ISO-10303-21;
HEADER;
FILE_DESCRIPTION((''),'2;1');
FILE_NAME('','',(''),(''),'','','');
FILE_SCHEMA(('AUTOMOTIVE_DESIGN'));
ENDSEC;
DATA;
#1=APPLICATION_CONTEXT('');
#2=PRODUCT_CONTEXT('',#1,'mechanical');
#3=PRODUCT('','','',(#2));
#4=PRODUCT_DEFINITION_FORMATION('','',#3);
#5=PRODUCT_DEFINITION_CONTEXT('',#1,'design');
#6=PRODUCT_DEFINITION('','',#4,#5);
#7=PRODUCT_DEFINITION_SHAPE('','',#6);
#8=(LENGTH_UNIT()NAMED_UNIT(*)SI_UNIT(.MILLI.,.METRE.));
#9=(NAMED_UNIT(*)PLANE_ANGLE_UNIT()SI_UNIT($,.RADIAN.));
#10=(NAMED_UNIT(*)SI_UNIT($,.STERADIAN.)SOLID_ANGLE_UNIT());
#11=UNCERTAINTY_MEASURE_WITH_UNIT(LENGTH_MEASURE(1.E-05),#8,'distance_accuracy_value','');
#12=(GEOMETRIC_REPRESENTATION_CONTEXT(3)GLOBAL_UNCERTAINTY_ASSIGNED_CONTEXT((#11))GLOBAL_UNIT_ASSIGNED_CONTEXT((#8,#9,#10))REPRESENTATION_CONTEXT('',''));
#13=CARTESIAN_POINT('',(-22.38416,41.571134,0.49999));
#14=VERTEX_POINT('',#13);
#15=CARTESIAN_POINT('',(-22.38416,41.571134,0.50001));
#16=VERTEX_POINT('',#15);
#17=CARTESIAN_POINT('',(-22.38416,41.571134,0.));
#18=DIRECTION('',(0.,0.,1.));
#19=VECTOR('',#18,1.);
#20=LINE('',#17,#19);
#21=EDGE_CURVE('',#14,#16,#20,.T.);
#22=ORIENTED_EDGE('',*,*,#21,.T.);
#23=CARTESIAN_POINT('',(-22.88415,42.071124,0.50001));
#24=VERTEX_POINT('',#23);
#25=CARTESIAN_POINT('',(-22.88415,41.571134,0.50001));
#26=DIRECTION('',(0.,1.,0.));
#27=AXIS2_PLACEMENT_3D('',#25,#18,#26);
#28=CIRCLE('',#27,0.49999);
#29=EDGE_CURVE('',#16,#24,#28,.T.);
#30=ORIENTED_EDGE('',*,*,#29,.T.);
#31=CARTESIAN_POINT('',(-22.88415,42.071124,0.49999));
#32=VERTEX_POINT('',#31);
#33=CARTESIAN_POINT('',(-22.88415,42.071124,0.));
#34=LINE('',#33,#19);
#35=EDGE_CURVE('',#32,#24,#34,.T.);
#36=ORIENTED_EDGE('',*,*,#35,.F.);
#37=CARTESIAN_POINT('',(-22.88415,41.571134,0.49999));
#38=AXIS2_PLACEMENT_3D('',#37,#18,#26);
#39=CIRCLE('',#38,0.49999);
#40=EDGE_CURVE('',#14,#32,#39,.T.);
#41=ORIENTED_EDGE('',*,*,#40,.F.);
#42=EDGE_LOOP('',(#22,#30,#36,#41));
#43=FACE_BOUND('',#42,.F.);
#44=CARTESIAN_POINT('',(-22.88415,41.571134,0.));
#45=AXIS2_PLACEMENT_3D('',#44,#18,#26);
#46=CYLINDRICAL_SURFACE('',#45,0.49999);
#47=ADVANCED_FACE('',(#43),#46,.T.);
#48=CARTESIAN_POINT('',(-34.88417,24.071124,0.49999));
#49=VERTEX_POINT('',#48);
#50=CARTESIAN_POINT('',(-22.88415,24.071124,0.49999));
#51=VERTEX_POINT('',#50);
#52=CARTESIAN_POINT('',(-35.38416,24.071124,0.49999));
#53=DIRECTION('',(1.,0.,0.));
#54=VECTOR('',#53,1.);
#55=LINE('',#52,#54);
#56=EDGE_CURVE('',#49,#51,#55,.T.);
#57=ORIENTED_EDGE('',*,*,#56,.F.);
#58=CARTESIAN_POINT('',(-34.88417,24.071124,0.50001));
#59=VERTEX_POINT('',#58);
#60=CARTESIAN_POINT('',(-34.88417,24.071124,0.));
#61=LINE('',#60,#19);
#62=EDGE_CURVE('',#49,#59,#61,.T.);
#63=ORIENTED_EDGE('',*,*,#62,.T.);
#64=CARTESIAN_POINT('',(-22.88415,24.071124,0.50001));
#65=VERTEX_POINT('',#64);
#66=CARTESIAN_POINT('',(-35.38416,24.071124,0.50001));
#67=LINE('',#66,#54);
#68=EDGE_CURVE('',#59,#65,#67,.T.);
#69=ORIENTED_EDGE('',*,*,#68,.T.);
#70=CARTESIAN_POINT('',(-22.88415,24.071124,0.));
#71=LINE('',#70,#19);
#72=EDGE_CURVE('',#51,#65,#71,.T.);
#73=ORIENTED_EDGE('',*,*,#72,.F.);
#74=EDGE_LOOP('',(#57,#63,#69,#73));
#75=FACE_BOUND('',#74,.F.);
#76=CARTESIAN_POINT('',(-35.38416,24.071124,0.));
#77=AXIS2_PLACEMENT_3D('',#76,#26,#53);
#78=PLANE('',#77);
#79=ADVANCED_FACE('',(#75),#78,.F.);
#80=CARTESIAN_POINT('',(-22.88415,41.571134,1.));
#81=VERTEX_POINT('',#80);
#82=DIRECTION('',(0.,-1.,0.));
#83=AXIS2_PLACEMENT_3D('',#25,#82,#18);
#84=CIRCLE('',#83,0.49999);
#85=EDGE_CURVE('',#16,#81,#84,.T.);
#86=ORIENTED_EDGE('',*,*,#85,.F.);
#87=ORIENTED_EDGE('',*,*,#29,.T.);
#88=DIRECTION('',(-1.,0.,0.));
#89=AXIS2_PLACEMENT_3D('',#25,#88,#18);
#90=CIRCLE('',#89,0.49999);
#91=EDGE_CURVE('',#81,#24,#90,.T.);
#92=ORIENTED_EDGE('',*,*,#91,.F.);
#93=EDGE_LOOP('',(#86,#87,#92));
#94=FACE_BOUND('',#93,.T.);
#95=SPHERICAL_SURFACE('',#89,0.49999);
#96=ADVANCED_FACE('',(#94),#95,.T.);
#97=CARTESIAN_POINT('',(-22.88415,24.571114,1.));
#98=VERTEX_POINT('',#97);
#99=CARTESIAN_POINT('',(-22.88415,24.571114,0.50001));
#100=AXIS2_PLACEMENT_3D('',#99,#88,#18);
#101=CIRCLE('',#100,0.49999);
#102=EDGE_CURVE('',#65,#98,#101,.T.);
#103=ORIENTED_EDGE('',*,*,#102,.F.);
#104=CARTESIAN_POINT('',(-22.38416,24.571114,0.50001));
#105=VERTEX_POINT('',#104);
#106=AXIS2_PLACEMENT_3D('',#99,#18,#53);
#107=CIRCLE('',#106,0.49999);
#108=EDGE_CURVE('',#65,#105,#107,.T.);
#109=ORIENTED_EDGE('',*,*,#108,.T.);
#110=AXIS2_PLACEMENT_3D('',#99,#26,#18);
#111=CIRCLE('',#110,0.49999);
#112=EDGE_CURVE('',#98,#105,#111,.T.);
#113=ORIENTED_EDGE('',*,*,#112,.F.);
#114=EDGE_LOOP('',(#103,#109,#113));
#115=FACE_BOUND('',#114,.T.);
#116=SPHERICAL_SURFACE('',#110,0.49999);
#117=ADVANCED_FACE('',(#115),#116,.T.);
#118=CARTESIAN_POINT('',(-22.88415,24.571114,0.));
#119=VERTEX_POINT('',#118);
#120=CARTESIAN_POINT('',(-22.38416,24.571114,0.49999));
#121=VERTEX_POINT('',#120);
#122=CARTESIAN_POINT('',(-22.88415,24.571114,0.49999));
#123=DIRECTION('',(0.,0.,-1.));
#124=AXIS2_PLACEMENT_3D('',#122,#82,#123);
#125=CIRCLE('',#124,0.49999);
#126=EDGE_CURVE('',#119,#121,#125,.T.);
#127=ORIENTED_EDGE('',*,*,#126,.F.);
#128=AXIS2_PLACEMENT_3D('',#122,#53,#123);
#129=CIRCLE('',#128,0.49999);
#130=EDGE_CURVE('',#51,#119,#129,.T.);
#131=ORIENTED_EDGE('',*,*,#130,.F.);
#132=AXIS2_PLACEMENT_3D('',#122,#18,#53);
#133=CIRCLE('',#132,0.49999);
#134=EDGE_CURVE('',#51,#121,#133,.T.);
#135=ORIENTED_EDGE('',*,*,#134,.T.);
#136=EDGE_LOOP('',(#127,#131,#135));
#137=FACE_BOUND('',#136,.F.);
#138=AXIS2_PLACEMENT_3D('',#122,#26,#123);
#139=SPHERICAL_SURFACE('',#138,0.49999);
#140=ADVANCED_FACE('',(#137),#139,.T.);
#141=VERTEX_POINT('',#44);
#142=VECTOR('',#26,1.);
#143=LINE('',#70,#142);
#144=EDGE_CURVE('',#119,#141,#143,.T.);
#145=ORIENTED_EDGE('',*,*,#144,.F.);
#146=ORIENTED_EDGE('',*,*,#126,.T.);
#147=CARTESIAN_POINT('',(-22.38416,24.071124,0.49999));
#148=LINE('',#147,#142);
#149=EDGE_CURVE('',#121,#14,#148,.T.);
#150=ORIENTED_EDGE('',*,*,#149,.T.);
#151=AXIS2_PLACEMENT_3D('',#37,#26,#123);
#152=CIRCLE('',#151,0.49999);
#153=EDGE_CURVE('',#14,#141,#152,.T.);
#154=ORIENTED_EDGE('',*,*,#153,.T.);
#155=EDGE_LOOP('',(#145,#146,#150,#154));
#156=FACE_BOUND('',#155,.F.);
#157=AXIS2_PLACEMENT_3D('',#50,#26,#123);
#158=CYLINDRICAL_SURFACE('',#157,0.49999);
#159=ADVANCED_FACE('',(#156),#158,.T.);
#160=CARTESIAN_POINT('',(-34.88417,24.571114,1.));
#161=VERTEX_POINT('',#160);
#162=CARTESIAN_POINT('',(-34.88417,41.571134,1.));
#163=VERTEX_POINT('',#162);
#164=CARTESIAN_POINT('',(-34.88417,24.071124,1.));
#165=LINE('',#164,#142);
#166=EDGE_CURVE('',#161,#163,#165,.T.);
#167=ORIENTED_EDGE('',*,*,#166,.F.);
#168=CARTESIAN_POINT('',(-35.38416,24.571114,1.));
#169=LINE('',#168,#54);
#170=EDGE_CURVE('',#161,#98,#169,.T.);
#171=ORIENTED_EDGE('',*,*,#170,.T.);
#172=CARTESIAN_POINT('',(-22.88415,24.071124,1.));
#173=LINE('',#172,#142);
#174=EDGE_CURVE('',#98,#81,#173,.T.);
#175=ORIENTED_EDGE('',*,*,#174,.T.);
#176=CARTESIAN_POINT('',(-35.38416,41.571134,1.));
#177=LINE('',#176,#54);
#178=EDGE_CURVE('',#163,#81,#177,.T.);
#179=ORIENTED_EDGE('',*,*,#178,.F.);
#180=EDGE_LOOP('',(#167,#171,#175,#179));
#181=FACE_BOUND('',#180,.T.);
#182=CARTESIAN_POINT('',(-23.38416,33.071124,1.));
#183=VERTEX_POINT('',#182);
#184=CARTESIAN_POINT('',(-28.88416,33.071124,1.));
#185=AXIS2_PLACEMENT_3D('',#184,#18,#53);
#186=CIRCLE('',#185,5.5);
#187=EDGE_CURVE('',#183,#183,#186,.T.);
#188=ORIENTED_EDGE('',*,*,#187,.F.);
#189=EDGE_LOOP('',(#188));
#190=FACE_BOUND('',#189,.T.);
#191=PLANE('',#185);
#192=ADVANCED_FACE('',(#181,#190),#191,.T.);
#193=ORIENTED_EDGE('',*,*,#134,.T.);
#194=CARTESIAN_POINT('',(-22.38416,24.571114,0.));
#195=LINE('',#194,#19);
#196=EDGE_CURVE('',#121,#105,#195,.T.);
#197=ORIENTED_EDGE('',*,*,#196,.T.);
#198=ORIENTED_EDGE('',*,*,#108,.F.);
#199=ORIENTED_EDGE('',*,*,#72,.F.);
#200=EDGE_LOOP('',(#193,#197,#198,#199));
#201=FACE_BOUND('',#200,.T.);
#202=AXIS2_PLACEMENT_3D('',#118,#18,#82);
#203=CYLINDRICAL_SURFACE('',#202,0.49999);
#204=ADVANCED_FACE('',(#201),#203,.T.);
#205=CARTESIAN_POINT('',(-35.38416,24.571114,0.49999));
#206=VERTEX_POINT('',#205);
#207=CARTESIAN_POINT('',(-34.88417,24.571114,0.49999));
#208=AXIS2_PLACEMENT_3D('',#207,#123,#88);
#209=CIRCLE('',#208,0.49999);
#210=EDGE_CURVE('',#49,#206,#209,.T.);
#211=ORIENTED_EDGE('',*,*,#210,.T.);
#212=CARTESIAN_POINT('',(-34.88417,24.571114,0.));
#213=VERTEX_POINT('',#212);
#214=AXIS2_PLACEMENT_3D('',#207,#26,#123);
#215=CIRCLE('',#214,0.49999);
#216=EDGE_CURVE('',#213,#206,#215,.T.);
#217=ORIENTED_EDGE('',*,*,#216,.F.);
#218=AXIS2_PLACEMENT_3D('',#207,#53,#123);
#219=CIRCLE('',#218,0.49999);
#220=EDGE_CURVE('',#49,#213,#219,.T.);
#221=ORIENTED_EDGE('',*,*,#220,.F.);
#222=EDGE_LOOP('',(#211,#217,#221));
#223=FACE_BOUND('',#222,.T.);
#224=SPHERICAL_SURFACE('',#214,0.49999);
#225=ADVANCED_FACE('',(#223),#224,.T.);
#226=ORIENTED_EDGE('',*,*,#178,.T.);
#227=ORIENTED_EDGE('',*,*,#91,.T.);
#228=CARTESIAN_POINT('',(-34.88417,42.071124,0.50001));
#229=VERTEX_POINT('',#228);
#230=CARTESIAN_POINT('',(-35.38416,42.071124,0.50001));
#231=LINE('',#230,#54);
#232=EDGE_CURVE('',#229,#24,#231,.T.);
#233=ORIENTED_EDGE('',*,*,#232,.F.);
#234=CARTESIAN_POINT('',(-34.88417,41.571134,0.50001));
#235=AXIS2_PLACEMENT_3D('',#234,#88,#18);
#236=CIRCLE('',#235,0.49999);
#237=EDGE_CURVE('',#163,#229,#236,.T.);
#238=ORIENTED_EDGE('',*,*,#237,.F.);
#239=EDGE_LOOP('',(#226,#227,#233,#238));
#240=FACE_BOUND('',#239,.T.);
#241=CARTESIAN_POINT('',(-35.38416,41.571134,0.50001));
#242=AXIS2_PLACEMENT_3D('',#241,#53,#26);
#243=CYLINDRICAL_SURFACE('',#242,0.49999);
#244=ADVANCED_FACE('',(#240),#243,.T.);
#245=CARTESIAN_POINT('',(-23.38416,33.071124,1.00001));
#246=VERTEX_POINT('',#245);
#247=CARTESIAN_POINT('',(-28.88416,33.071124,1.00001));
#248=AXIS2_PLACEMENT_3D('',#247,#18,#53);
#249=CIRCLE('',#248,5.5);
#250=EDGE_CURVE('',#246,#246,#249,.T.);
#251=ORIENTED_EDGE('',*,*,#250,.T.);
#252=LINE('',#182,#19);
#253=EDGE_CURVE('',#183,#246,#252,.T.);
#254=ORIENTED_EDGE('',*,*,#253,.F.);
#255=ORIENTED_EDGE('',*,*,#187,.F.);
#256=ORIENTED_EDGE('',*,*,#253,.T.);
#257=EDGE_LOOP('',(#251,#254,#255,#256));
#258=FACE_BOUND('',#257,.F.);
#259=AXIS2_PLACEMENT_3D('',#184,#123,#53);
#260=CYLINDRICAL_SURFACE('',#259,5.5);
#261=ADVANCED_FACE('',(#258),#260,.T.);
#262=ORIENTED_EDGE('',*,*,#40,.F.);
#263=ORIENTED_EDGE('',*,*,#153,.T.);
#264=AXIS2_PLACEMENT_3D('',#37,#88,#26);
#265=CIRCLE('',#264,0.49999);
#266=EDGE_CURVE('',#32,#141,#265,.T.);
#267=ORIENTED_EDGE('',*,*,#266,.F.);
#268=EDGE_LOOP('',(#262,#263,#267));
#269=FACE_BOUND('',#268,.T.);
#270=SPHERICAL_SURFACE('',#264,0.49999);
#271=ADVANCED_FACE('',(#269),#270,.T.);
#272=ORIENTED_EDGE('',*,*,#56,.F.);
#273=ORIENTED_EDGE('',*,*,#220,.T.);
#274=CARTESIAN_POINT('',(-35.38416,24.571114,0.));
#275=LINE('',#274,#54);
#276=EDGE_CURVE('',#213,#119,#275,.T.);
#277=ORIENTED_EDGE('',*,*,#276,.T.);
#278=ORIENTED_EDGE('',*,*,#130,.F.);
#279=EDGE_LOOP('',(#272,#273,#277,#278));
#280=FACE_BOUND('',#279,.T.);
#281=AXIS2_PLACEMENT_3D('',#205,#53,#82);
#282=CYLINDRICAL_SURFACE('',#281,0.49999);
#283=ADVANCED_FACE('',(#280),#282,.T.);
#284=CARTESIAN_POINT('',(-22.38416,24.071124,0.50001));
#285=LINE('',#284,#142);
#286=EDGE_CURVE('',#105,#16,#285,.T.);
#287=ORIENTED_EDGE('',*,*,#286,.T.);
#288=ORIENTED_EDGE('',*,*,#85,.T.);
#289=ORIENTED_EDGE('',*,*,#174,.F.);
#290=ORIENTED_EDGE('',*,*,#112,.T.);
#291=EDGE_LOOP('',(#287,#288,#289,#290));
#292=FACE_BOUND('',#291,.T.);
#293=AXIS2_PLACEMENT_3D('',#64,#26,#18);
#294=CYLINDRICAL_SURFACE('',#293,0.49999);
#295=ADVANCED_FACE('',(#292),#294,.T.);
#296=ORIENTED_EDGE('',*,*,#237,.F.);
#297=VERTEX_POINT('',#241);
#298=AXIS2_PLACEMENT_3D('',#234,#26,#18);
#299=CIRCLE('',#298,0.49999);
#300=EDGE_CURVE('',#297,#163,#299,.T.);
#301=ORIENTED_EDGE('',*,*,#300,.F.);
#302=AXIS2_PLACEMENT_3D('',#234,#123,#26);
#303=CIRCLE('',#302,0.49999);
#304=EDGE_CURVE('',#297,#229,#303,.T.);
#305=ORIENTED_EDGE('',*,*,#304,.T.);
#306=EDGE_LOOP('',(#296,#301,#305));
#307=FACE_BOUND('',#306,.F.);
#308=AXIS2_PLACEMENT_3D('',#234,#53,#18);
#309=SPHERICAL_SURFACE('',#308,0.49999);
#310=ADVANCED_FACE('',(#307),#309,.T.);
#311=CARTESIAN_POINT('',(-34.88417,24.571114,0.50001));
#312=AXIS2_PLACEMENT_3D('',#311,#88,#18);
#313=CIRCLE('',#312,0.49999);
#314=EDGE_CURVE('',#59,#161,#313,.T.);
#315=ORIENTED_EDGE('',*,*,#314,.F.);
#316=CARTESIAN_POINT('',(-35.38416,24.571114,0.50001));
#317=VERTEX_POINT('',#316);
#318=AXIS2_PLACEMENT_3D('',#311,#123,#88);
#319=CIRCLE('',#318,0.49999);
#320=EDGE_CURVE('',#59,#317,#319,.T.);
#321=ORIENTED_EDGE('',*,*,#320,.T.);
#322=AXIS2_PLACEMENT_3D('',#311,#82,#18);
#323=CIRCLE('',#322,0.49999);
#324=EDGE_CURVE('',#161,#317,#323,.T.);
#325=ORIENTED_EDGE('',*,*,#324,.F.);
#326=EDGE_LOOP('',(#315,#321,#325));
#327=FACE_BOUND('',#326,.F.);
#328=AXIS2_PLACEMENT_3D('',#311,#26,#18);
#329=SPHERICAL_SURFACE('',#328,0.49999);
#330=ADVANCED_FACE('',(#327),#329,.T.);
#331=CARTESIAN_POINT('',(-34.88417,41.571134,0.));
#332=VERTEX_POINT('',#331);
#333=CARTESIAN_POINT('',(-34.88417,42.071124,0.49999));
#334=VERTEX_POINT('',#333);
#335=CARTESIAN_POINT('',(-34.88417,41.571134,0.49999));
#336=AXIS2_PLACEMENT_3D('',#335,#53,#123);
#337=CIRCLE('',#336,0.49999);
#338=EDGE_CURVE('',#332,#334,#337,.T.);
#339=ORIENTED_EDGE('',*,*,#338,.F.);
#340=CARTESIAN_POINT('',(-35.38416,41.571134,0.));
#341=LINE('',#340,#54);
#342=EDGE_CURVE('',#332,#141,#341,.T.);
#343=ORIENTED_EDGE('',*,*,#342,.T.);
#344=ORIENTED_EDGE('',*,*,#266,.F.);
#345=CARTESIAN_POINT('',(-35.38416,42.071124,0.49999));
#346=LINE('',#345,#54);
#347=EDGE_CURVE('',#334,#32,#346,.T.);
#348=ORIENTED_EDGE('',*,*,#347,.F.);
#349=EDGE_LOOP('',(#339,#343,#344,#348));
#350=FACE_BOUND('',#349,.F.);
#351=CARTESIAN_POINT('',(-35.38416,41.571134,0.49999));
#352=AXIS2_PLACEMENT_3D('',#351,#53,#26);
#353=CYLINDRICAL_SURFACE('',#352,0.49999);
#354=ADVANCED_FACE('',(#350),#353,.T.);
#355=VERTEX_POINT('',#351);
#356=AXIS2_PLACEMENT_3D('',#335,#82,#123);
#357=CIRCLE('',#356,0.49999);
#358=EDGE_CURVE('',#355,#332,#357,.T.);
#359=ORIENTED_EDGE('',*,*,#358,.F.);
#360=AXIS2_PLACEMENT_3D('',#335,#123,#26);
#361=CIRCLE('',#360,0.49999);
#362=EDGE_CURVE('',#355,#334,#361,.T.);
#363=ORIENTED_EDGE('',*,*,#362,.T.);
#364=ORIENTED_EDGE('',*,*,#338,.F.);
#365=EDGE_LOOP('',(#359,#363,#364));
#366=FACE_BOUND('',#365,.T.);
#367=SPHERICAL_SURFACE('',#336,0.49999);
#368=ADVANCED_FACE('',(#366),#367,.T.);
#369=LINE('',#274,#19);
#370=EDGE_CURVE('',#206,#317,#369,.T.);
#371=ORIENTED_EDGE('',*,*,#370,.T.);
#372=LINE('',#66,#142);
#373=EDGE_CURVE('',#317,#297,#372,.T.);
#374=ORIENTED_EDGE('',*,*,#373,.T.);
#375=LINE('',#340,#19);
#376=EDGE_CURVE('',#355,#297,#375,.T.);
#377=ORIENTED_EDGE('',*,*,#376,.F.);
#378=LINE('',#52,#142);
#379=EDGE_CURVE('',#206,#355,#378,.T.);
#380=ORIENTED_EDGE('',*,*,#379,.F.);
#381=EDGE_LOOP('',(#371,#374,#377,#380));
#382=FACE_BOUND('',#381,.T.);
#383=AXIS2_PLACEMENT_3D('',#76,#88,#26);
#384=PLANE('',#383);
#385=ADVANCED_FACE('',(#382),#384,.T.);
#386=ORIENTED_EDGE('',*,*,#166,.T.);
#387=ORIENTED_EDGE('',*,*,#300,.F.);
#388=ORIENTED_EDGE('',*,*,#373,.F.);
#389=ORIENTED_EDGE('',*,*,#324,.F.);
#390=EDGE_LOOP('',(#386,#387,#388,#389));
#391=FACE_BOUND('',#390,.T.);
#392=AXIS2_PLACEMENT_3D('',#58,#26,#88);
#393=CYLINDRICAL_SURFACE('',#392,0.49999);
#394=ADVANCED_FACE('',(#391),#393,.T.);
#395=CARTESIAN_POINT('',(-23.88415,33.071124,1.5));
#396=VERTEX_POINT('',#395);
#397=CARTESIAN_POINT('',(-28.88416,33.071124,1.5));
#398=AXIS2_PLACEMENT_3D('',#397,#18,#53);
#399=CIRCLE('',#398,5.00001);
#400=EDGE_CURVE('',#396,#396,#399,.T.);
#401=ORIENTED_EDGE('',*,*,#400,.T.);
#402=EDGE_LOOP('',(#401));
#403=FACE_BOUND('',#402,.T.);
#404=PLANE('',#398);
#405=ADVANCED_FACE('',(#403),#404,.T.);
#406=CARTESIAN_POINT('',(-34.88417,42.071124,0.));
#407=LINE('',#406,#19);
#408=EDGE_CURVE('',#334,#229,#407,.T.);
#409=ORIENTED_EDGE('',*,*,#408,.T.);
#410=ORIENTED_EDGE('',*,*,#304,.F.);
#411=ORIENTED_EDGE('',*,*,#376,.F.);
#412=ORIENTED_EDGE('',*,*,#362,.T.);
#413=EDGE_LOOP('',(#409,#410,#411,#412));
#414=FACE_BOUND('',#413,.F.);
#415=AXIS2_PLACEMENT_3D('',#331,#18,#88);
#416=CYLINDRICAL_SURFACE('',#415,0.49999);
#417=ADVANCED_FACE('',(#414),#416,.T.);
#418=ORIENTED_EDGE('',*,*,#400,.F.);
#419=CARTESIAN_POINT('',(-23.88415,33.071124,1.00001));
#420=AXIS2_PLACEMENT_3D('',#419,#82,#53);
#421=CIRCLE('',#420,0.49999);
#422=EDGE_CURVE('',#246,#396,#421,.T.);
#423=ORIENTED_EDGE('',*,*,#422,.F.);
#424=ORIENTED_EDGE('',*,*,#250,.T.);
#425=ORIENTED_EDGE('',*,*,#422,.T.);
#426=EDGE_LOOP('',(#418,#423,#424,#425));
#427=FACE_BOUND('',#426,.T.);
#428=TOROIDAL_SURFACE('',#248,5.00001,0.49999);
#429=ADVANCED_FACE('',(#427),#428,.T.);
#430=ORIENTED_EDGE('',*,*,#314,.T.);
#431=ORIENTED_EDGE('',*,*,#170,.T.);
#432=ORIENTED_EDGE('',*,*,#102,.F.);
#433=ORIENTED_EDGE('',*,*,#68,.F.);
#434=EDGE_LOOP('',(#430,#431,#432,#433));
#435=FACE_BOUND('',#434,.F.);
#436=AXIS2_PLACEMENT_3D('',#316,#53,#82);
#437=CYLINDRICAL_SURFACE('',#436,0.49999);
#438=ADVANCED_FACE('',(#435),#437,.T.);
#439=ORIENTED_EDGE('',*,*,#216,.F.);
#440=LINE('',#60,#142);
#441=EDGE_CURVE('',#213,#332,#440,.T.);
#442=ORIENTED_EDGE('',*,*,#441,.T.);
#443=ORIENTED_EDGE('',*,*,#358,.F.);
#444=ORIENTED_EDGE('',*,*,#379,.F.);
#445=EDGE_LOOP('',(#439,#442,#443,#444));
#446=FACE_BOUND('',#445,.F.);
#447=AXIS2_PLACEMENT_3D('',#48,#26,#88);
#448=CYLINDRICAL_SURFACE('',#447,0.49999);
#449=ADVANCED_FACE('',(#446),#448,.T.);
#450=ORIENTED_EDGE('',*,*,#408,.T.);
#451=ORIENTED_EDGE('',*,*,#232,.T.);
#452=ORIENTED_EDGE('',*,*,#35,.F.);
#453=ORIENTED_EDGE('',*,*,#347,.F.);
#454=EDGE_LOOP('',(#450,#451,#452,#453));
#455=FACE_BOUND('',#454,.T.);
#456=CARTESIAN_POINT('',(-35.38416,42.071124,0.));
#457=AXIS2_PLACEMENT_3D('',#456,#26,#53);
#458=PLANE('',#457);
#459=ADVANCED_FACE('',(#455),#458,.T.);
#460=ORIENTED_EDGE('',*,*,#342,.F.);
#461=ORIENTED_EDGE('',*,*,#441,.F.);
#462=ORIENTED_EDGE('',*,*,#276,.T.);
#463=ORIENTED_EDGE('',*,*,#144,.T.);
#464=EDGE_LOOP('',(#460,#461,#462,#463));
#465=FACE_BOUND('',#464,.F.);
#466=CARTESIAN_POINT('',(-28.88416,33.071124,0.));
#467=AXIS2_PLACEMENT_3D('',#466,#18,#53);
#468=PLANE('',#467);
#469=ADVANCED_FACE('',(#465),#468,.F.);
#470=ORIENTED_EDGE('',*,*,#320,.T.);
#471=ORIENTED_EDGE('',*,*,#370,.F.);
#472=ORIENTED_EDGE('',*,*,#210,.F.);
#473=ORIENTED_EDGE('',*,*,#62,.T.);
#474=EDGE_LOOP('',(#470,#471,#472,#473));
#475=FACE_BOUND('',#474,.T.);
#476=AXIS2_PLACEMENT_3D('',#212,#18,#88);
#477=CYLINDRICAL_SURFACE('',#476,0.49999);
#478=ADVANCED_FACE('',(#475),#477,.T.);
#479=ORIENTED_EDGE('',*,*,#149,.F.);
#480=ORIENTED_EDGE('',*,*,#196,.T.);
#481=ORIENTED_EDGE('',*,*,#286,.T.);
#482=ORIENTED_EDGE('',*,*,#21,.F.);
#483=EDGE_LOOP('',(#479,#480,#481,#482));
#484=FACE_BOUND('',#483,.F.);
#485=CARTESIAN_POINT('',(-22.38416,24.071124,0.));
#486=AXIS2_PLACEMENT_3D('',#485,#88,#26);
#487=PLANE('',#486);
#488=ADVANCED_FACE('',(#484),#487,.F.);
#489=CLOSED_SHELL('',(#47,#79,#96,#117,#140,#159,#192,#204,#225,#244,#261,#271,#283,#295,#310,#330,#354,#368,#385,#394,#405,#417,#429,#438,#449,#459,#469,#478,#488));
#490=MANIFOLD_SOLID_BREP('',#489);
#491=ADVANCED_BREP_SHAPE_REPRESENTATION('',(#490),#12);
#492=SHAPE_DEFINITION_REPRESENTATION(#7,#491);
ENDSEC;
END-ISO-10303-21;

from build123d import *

# Parameters (mm, degrees)
F0_W     = 13
F0_H     = 18
F1_DEPTH = 1
F2_R     = 5.5
F3_DEPTH = 0.5
F4_R     = 0.49999


# Not quite as in the source:
# - a fillet or chamfer is up to 0.001 mm smaller than in the source, because OpenCascade refuses the exact size


with BuildPart() as f1:
    # F0 (on Top) → F1 (new body)
    with BuildSketch(Plane.XY):
        with Locations((-28.8841596369, 33.0711239949)):
            Rectangle(F0_W, F0_H)
    extrude(amount=F1_DEPTH)

    # F2 (on face) → F3 (join)
    with BuildSketch(Plane.XY.offset(1)):
        with Locations((-28.8841596369, 33.0711239949)):
            Circle(F2_R)
    extrude(amount=F3_DEPTH)

    # F4 (radius 0.5 in the source; OpenCascade refuses exactly that, so slightly less here)
    f4_edges = [f1.edges().sort_by_distance(p)[0] for p in [
        (-28.88416, 42.071124, 1),
        (-28.88416, 42.071124, 0),
        (-35.38416, 33.071124, 1),
        (-22.38416, 33.071124, 1),
        (-28.88416, 24.071124, 1),
        (-34.38416, 33.071124, 1.5),
        (-22.38416, 42.071124, 0.5),
        (-22.38416, 33.071124, 0),
        (-35.38416, 33.071124, 0),
        (-28.88416, 24.071124, 0),
        (-22.38416, 24.071124, 0.5),
        (-35.38416, 24.071124, 0.5),
        (-35.38416, 42.071124, 0.5),
    ]]
    fillet(f4_edges, radius=F4_R)


solid = f1.part
